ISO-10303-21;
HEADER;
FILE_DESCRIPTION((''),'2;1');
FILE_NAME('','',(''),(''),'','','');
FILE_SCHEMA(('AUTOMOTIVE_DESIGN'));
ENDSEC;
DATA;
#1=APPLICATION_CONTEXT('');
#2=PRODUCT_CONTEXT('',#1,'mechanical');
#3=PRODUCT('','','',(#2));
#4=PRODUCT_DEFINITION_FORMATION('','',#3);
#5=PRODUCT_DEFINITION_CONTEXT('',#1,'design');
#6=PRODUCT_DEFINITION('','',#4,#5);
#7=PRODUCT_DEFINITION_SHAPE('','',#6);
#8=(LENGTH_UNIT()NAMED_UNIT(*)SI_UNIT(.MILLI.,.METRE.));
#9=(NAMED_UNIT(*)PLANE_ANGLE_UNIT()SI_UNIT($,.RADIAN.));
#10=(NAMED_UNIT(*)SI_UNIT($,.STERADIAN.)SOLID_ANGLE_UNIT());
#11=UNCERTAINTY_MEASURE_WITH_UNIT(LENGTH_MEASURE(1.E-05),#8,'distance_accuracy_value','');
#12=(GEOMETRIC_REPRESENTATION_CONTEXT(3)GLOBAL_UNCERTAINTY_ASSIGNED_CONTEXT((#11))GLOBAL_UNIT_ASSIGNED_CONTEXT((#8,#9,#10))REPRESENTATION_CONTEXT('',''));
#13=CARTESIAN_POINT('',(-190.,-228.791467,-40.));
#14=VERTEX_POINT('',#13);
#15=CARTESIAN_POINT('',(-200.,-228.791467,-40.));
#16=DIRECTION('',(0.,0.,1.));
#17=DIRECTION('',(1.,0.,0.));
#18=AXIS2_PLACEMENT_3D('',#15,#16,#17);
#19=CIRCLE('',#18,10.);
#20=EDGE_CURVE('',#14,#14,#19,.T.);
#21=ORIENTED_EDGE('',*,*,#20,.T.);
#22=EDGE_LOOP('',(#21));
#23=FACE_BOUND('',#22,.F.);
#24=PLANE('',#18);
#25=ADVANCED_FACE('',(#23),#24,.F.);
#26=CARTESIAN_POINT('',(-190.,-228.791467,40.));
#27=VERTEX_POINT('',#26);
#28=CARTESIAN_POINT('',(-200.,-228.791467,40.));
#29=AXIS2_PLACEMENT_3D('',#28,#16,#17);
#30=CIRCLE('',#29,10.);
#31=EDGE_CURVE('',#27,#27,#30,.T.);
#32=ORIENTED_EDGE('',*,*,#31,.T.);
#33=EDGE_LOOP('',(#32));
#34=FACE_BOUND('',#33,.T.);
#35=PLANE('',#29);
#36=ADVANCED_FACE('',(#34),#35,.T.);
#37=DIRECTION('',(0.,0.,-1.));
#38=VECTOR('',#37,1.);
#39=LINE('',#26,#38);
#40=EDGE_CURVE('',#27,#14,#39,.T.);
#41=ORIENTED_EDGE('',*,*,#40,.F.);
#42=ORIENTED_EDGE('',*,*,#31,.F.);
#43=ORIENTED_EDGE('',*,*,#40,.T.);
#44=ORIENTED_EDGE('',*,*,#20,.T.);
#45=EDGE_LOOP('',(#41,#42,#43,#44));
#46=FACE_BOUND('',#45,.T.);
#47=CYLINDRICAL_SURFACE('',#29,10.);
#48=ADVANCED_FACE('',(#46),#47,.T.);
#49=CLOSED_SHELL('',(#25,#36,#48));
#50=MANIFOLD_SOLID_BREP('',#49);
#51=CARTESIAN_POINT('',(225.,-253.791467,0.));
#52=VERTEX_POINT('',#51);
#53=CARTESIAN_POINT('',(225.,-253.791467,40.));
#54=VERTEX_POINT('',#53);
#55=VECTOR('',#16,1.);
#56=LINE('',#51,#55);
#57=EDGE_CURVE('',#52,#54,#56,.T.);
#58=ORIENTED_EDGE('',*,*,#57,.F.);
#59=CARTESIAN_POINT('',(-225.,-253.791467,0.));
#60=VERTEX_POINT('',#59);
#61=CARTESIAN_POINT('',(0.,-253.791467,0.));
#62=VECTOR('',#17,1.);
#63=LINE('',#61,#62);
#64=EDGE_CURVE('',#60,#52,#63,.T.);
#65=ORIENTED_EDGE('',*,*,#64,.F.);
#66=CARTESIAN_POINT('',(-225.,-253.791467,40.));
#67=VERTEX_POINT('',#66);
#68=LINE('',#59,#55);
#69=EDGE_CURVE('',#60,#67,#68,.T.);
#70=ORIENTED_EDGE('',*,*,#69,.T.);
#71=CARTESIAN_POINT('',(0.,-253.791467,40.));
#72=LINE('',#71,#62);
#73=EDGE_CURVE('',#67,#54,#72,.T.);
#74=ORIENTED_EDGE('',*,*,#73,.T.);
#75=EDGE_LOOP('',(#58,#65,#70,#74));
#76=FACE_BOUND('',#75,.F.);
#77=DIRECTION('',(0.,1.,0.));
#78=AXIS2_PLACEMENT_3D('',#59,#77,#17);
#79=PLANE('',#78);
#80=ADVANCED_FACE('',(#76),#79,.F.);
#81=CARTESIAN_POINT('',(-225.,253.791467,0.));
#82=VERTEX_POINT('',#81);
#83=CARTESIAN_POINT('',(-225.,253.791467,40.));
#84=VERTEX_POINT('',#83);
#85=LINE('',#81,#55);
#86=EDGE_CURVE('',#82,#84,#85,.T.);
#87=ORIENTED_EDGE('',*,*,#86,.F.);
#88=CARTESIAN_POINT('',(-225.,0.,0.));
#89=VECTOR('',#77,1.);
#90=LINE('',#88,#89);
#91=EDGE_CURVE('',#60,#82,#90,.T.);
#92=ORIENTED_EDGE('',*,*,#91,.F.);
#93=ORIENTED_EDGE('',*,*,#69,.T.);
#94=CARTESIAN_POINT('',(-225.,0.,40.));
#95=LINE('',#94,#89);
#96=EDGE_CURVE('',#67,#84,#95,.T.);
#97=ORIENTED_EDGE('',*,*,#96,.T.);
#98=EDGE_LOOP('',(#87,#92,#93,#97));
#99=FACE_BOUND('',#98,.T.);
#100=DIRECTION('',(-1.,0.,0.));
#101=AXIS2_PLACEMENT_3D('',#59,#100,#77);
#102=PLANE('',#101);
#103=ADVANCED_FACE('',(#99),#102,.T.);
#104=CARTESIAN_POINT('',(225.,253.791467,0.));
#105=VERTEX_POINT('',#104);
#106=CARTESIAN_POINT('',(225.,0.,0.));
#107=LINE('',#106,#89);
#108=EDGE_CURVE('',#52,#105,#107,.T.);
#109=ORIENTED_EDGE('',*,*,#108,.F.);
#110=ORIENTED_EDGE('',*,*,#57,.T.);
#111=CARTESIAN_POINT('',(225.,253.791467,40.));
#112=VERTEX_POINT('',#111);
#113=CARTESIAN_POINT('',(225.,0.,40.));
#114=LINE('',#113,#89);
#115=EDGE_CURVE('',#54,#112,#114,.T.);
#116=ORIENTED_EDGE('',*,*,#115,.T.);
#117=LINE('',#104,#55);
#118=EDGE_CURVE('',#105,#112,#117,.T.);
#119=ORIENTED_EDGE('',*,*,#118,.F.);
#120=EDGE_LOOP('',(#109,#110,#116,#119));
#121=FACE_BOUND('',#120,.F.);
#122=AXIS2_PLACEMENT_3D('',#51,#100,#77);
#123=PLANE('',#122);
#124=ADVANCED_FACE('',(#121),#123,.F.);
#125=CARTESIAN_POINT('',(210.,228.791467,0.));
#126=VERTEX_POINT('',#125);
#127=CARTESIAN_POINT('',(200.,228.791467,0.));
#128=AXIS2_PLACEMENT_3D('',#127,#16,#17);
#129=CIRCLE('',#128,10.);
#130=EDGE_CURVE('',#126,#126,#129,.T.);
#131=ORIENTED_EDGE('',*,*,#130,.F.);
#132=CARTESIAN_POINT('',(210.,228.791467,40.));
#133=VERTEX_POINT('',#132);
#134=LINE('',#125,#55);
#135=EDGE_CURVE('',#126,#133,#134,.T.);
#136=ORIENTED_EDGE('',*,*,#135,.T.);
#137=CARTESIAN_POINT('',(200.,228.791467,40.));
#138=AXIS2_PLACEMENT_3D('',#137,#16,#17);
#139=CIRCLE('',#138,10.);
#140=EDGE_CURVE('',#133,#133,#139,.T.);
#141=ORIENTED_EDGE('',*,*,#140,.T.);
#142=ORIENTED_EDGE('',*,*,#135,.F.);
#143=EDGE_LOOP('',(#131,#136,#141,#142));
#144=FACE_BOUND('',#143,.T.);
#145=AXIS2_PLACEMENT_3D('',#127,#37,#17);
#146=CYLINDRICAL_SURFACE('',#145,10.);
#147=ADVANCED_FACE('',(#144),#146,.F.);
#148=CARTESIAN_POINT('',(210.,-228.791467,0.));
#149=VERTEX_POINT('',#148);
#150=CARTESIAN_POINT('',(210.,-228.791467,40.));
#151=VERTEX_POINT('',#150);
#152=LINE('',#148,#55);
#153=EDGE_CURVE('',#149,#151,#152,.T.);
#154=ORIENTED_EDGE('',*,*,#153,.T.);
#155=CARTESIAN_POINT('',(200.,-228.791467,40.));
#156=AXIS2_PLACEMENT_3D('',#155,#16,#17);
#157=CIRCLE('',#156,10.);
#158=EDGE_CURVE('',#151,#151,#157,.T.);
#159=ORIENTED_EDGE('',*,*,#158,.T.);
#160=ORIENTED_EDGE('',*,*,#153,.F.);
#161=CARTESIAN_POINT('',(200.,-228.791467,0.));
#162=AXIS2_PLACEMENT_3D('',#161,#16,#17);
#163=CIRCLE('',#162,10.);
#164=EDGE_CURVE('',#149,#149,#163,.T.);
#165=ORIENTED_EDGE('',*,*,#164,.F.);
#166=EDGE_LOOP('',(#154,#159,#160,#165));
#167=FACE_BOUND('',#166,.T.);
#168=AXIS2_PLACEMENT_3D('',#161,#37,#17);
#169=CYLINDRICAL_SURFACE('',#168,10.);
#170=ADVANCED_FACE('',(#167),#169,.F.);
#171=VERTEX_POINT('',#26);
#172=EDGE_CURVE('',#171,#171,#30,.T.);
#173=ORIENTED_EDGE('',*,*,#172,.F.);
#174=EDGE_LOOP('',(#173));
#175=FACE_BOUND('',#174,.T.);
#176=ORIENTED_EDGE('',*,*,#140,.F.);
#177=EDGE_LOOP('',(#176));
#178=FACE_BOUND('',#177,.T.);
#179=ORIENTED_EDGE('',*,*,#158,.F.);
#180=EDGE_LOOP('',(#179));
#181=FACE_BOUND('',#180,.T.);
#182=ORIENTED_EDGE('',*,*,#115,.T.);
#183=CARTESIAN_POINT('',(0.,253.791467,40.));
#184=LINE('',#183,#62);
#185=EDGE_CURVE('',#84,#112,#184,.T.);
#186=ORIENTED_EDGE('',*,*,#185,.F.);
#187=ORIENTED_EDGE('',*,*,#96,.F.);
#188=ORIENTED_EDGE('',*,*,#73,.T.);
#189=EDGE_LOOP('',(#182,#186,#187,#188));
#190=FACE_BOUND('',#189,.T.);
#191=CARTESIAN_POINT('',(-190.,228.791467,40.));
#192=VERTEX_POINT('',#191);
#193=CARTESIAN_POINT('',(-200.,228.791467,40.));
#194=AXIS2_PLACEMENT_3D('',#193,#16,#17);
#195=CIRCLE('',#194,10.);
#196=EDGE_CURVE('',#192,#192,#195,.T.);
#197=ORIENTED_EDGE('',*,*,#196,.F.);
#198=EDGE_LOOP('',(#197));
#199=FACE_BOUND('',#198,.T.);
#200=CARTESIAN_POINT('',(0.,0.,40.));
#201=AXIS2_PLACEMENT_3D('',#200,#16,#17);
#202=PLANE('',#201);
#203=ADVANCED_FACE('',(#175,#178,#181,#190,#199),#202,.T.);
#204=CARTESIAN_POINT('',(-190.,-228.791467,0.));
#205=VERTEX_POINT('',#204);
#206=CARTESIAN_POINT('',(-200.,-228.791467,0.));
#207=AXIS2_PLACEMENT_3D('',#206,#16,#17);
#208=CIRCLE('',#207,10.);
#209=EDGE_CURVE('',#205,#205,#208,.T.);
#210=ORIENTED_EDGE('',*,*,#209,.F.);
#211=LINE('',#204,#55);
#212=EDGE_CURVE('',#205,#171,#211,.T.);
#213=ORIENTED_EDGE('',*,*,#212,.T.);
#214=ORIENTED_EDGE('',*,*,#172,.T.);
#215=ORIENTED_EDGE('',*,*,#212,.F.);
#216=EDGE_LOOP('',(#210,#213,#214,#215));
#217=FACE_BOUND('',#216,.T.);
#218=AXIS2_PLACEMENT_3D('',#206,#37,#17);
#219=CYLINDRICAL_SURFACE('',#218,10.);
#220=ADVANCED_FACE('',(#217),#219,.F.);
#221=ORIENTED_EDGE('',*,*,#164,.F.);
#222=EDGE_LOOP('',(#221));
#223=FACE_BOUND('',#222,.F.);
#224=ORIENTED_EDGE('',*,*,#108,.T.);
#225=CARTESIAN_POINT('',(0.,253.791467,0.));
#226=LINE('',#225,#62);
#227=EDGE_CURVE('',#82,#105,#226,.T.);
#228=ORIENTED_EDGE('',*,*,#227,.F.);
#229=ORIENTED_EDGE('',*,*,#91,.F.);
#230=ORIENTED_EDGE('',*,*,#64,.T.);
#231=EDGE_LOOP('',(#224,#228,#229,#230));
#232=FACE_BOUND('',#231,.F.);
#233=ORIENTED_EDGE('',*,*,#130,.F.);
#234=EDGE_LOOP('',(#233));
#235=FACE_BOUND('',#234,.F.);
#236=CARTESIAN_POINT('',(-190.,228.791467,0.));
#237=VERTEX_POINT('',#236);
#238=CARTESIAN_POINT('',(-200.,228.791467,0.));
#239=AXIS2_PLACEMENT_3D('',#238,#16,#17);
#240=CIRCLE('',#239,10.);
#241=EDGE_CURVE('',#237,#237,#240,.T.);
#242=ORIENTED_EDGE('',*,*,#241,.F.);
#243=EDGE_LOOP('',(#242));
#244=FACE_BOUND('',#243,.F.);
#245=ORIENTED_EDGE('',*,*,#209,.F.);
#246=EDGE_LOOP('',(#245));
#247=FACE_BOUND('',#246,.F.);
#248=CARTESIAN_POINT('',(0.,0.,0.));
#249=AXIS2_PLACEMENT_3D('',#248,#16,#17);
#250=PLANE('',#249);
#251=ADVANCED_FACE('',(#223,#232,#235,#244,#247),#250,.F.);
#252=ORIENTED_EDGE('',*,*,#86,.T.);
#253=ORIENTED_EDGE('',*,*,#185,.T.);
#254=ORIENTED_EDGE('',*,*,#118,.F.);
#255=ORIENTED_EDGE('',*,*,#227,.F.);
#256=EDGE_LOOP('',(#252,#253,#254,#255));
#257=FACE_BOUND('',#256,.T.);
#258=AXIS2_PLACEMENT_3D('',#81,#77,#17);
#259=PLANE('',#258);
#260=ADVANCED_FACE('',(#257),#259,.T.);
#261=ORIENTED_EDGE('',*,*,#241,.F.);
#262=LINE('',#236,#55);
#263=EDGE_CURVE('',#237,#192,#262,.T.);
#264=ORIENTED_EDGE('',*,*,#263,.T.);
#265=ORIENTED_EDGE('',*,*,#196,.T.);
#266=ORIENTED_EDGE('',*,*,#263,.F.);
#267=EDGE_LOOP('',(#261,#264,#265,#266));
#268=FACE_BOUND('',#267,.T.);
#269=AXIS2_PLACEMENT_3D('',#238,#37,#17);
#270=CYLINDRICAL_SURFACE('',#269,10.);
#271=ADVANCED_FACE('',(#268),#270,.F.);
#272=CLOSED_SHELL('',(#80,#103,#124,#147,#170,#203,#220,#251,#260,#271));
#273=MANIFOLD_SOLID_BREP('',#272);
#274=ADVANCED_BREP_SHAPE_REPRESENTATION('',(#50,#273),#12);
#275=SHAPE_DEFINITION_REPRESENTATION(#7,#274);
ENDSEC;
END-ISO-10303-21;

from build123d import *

# Parameters (mm, degrees)
F0_W     = 450
F0_H     = 507.5829336092
F0_R     = 10
F1_DEPTH = 40
F2_R     = 10
F3_DEPTH = 80


# Not quite as in the source:
# - the program builds the solid bodies; features that only make, move or delete a surface that nothing else refers to are left out


with BuildPart() as f1:
    # F0 (on Top) → F1 (new body)
    with BuildSketch(Plane.XY):
        Rectangle(F0_W, F0_H)
        with Locations((-200, -228.7914668046)):
            Circle(F0_R, mode=Mode.SUBTRACT)
        with Locations((200, -228.7914668046)):
            Circle(F0_R, mode=Mode.SUBTRACT)
        with Locations((-200, 228.7914668046)):
            Circle(F0_R, mode=Mode.SUBTRACT)
        with Locations((200, 228.7914668046)):
            Circle(F0_R, mode=Mode.SUBTRACT)
    extrude(amount=F1_DEPTH)


with BuildPart() as f3:
    # F2 (on face) → F3 (new body)
    with BuildSketch(Plane.XY.offset(40)):
        with Locations((-200, -228.7914668046)):
            Circle(F2_R)
    extrude(amount=-F3_DEPTH)


solid = Compound([f1.part, f3.part])
